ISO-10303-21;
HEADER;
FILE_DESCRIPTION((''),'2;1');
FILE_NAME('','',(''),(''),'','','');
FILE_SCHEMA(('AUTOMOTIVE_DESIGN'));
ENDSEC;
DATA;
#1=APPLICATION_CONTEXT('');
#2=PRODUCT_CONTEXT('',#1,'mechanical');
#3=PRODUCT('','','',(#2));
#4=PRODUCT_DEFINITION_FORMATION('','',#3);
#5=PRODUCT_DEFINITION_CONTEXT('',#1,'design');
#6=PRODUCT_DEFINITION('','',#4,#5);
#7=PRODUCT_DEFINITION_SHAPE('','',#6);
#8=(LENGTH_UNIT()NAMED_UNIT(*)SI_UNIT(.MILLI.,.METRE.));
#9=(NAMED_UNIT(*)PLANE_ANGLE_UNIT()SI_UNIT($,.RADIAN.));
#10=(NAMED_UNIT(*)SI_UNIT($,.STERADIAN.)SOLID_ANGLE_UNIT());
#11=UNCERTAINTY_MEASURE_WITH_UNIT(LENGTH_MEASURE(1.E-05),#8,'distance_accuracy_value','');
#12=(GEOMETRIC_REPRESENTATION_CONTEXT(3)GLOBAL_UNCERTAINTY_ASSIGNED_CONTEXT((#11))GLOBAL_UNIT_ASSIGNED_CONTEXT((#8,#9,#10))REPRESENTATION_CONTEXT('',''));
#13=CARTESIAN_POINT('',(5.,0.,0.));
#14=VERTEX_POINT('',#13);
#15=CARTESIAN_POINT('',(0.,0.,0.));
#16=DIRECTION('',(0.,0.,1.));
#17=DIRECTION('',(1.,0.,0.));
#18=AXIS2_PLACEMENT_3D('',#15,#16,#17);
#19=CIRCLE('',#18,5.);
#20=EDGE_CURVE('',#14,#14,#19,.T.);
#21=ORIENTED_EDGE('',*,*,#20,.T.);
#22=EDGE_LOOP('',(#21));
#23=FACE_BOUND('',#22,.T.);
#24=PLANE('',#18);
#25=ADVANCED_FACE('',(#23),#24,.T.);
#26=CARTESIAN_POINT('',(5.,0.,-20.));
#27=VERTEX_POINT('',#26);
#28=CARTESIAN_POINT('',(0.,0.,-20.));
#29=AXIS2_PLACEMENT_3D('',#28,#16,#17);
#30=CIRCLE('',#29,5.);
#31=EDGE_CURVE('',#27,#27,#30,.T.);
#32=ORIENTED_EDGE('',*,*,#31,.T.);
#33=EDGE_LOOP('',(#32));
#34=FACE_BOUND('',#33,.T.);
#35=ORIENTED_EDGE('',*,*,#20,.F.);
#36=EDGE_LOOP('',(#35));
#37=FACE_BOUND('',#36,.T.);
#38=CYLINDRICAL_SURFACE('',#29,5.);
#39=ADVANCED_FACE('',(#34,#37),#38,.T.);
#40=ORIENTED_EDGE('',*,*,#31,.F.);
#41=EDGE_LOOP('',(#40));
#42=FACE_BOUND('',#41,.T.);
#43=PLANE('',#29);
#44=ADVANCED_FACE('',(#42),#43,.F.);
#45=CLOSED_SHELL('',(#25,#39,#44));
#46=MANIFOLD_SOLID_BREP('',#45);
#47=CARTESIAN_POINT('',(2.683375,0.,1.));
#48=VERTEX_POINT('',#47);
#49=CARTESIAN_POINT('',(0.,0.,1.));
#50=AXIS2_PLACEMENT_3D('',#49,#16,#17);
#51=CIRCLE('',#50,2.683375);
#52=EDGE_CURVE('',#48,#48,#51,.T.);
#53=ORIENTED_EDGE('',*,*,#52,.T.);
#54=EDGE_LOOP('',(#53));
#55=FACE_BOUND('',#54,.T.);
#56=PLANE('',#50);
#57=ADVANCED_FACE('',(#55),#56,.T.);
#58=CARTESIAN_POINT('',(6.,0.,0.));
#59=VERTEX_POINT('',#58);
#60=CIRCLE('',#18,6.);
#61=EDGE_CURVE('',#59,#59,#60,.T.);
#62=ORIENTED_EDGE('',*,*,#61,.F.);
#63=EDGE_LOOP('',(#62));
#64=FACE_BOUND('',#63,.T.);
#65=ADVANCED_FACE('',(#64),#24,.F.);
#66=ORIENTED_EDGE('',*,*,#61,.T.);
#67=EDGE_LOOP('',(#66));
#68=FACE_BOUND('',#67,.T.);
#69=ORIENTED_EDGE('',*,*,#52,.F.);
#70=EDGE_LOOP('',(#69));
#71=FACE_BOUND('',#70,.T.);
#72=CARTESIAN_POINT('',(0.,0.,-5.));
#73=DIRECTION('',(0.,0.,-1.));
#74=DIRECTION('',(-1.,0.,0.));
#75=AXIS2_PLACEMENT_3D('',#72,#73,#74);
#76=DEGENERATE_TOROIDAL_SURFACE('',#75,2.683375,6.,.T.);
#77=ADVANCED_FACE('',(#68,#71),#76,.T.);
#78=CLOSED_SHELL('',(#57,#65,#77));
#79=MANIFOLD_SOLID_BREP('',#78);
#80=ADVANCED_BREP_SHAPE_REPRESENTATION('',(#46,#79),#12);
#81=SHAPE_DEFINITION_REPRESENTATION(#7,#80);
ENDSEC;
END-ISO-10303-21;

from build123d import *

# Parameters (mm, degrees)
SKETCH1_R           = 5
BOSS_EXTRUDE2_DEPTH = 20
SKETCH1_4_R         = 6
BOSS_EXTRUDE3_DEPTH = 1
FILLET1_R           = 6


with BuildPart() as part:
    # Sketch1 → Boss-Extrude2 (new body)
    with BuildSketch(Plane.XY):
        Circle(SKETCH1_R)
    extrude(amount=-BOSS_EXTRUDE2_DEPTH)


with BuildPart() as body_2:
    # Sketch1<4> → Boss-Extrude3 (new body)
    with BuildSketch(Plane.XY):
        Circle(SKETCH1_4_R)
    extrude(amount=BOSS_EXTRUDE3_DEPTH)

    # Fillet1
    # the kernel refuses this fillet: 6 mm, written as the material it takes off along each edge
    with BuildSketch(Plane(origin=(0, 0, 1), x_dir=(1, 0, 0), z_dir=(0, -1, 0))) as fillet1_piece_1:
        with BuildLine():
            CenterArc((2.68337521, -6), FILLET1_R, 56.442690238, 33.557309762)
            Line((2.68337521, 0), (2.68337521, 0.12))
            Line((2.68337521, 0.12), (6, 0.12))
            Line((6, 0.12), (6.12, 0))
            ThreePointArc((6.12, 0), (6.12, -0.5), (6.066332496, -0.9))
            Line((6.066332496, -0.9), (6, -1))
        make_face()
    revolve(axis=Axis((0, 0, 1), (0, 0, 1)), mode=Mode.SUBTRACT)


solid = Compound([part.part, body_2.part])
